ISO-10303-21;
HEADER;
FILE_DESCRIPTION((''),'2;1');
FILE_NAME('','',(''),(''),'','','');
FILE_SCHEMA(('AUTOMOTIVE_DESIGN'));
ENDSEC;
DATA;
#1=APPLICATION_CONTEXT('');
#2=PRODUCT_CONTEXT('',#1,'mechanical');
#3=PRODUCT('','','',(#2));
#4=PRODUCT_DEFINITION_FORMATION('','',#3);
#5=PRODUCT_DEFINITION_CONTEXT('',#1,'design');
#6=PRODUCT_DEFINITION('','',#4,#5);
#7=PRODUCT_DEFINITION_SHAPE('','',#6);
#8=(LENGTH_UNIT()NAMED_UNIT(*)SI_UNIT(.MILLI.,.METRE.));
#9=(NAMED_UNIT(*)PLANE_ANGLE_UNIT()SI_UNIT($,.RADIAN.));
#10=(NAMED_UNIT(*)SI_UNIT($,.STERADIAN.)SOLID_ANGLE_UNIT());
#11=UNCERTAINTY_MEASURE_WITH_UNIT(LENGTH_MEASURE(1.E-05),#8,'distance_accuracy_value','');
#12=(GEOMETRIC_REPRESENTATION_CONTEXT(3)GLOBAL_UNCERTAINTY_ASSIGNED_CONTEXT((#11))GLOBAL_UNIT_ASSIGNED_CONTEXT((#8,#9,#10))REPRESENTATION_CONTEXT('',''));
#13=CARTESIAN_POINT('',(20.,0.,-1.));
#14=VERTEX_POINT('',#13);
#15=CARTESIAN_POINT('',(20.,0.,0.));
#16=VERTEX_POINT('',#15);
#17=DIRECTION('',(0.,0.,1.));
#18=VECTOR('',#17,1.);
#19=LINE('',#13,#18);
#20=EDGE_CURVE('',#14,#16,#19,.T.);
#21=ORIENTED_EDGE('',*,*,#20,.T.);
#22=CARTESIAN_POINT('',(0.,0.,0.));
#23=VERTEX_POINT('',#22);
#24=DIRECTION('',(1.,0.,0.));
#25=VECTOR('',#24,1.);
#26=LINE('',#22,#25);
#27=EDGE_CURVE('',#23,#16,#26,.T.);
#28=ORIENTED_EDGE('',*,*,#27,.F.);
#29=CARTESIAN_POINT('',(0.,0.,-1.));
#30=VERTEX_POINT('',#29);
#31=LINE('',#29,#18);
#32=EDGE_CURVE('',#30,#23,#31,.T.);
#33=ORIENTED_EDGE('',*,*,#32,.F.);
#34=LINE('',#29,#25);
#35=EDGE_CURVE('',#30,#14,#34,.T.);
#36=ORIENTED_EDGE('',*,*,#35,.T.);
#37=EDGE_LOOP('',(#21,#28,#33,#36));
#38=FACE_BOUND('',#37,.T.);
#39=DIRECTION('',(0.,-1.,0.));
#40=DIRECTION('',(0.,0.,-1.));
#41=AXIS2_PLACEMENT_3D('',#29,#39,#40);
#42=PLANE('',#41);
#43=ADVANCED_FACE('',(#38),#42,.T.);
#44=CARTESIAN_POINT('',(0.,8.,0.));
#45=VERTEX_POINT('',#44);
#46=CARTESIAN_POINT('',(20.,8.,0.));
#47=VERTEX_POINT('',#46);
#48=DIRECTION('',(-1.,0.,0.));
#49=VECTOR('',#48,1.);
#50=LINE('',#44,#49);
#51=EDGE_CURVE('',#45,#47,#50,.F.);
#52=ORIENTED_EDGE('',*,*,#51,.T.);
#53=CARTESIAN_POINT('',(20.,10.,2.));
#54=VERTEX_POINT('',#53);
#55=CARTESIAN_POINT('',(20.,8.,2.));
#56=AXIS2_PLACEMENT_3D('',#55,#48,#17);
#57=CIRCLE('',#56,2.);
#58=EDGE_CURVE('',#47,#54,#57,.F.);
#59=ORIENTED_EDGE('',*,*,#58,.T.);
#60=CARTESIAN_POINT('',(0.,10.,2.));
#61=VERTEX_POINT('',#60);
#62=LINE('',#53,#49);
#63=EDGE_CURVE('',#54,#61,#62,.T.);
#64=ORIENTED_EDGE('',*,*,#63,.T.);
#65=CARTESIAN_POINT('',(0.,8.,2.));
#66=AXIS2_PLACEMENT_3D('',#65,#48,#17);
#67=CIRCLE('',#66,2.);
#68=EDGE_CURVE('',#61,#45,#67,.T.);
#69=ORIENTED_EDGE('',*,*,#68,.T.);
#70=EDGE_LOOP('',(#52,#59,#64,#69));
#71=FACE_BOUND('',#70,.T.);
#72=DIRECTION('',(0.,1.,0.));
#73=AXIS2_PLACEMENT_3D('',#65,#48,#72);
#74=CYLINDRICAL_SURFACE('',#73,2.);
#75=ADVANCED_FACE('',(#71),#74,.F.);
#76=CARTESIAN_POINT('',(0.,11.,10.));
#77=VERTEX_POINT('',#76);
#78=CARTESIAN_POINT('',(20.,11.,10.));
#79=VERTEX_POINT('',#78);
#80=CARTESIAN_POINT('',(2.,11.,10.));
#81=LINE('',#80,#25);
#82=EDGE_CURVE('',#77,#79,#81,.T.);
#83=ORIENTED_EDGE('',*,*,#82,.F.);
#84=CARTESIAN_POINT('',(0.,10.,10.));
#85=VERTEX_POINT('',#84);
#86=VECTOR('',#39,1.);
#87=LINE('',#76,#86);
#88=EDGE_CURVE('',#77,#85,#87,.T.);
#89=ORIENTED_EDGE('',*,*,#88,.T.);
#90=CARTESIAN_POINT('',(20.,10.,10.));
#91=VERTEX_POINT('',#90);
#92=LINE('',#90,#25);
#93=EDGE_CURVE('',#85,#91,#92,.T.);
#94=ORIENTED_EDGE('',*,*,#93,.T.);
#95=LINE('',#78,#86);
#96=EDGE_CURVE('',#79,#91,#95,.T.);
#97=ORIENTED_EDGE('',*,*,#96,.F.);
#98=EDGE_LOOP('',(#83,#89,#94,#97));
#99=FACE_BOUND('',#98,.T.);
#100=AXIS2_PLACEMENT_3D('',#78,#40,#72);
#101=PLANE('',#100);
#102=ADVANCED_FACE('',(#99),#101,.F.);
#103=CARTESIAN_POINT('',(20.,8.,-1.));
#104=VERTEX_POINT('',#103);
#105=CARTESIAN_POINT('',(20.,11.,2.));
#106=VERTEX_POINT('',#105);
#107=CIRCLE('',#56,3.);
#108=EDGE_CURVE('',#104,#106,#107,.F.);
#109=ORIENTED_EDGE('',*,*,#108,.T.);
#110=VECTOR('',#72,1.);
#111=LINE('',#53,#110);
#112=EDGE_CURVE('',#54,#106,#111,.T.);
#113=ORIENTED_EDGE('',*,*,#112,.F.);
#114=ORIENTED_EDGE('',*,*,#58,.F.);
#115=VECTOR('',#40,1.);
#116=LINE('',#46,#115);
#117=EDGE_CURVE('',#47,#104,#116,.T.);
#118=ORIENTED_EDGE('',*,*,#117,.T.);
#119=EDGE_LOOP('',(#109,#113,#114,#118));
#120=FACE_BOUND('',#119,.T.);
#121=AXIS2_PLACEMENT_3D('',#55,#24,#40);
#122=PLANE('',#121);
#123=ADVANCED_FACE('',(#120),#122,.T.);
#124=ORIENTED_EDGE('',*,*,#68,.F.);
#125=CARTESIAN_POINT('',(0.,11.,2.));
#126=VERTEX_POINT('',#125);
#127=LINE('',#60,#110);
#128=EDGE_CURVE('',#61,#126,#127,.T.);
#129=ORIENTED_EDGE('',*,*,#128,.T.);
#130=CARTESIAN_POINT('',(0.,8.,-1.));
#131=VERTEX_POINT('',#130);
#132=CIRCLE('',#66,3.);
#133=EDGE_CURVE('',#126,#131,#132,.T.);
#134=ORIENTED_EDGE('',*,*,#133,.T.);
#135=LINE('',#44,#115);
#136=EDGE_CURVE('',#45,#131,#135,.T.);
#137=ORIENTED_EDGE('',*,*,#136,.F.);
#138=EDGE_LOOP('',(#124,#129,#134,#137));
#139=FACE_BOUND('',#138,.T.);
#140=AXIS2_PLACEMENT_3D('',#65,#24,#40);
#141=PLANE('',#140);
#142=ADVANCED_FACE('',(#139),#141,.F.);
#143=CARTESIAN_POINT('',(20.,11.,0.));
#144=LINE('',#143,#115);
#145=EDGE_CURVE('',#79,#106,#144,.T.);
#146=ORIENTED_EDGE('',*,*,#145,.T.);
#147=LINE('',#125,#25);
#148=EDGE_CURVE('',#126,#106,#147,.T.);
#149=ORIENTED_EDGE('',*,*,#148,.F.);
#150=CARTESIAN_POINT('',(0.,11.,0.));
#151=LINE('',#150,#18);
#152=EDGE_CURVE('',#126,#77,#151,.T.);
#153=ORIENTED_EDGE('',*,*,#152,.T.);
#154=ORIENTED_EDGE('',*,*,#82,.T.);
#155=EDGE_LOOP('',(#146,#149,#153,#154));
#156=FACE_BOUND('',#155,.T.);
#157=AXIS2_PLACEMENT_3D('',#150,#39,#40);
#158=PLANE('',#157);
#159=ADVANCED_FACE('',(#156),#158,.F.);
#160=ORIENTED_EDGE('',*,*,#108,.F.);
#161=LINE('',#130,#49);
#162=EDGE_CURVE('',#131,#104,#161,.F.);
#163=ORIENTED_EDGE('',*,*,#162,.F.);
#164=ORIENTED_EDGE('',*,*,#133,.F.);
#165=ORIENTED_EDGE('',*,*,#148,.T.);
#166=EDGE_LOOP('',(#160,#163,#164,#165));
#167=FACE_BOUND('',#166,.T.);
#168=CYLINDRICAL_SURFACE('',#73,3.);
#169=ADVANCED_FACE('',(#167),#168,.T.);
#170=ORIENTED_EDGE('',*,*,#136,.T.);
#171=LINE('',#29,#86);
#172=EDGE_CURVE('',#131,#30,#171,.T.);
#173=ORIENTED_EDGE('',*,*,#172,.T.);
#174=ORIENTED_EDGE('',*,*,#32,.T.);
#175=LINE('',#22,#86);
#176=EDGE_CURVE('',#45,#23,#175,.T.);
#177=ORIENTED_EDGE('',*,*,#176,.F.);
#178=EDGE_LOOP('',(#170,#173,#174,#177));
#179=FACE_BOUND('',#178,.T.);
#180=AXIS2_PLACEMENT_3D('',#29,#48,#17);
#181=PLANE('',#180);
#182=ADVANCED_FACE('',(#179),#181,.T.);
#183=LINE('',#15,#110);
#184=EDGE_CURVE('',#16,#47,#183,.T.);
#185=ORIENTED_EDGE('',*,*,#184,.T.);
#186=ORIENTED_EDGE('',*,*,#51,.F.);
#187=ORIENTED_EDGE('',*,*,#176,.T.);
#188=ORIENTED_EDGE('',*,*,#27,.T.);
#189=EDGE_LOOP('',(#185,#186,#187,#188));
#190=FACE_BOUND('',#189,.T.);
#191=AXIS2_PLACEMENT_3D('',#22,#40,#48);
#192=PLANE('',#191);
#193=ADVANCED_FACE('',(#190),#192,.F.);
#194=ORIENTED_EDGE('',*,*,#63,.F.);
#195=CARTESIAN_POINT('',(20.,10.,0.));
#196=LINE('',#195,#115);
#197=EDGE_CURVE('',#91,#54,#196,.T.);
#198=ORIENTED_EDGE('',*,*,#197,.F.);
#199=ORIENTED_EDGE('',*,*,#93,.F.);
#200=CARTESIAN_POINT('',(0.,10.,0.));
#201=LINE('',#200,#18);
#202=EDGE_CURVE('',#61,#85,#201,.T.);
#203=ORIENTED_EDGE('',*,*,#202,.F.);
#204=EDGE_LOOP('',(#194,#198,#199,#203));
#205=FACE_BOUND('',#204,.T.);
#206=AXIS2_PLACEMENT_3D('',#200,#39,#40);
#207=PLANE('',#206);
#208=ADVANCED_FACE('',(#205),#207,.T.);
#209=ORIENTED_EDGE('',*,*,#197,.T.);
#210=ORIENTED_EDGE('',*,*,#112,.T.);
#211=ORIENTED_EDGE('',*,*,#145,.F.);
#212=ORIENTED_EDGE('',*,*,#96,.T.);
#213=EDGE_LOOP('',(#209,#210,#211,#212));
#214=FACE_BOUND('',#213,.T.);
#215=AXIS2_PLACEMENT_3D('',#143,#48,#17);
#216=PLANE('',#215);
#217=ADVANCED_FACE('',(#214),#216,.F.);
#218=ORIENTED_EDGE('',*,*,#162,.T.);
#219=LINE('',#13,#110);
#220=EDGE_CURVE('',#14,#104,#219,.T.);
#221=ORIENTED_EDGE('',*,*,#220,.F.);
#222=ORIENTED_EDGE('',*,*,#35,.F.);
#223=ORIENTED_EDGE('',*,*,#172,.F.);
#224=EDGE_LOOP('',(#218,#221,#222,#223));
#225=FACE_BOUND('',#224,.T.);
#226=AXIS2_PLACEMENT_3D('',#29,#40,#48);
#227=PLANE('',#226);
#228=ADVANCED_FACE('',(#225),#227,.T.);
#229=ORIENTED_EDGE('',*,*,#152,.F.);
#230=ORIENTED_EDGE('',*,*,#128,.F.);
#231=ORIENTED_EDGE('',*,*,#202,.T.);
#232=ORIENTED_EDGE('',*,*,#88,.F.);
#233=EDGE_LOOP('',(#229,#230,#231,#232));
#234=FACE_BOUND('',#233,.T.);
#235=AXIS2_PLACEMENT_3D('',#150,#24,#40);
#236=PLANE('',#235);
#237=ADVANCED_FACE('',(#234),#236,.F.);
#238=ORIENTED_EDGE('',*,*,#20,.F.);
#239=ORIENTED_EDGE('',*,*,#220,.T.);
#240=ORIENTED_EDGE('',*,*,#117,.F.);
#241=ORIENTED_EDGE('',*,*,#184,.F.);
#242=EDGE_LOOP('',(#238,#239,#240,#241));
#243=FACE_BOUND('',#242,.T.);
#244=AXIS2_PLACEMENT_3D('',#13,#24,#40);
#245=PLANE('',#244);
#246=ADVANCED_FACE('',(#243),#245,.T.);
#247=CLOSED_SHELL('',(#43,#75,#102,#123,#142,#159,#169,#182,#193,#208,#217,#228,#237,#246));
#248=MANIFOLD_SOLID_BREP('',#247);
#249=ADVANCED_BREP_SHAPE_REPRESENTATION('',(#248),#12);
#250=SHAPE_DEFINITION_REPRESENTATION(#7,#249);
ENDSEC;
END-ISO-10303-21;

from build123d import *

# Parameters (mm, degrees)
SKETCH_1_W                 = 20
SKETCH_1_H                 = 10
BASEPLATE_DEPTH            = 1
EDGEFLANGE_STRIP_W         = 8
EDGEFLANGE_STRIP_H         = 1
EDGEFLANGE_STRIP_CUT_DEPTH = 20
EDGEFLANGE_DEPTH           = 20
EDGEFLANGE_START           = 1
EDGEFLANGE_FLAT_DEPTH      = 1


# Sheet-metal steps are written as plain solids
with BuildPart() as part:
    # Sketch 1 → BasePlate (new body)
    with BuildSketch(Plane.XY):
        with Locations((10, 5)):
            Rectangle(SKETCH_1_W, SKETCH_1_H)
    extrude(amount=-BASEPLATE_DEPTH)

    # EdgeFlange strip (across the edge) → EdgeFlange strip cut (cut)
    with BuildSketch(Plane(origin=(20, 10, 0), x_dir=(0, -1, 0), z_dir=(-1, 0, 0))):
        with Locations((-2, -0.5)):
            Rectangle(EDGEFLANGE_STRIP_W, EDGEFLANGE_STRIP_H)
    extrude(amount=EDGEFLANGE_STRIP_CUT_DEPTH, mode=Mode.SUBTRACT)

    # EdgeFlange bend section (across the edge) → EdgeFlange (add)
    with BuildSketch(Plane(origin=(20, 10, 0), x_dir=(0, -1, 0), z_dir=(-1, 0, 0))):
        with BuildLine():
            Line((-1, 2), (0, 2))
            ThreePointArc((0, 2), (0.585786438, 0.585786438), (2, 0))
            Line((2, 0), (2, -1))
            ThreePointArc((2, -1), (-0.121320344, -0.121320344), (-1, 2))
        make_face()
    extrude(amount=EDGEFLANGE_DEPTH)

    # EdgeFlange profile (on flange) → EdgeFlange flat (add)
    with BuildSketch(Plane(origin=(0, 10, 0), x_dir=(-1, 0, 0), z_dir=(0, 1, 0)).offset(EDGEFLANGE_START)):
        Polygon((-20, 10), (-20, 2), (0, 2), (0, 10), (-2, 10), (-18, 10), align=None)
    extrude(amount=-EDGEFLANGE_FLAT_DEPTH)


solid = part.part
